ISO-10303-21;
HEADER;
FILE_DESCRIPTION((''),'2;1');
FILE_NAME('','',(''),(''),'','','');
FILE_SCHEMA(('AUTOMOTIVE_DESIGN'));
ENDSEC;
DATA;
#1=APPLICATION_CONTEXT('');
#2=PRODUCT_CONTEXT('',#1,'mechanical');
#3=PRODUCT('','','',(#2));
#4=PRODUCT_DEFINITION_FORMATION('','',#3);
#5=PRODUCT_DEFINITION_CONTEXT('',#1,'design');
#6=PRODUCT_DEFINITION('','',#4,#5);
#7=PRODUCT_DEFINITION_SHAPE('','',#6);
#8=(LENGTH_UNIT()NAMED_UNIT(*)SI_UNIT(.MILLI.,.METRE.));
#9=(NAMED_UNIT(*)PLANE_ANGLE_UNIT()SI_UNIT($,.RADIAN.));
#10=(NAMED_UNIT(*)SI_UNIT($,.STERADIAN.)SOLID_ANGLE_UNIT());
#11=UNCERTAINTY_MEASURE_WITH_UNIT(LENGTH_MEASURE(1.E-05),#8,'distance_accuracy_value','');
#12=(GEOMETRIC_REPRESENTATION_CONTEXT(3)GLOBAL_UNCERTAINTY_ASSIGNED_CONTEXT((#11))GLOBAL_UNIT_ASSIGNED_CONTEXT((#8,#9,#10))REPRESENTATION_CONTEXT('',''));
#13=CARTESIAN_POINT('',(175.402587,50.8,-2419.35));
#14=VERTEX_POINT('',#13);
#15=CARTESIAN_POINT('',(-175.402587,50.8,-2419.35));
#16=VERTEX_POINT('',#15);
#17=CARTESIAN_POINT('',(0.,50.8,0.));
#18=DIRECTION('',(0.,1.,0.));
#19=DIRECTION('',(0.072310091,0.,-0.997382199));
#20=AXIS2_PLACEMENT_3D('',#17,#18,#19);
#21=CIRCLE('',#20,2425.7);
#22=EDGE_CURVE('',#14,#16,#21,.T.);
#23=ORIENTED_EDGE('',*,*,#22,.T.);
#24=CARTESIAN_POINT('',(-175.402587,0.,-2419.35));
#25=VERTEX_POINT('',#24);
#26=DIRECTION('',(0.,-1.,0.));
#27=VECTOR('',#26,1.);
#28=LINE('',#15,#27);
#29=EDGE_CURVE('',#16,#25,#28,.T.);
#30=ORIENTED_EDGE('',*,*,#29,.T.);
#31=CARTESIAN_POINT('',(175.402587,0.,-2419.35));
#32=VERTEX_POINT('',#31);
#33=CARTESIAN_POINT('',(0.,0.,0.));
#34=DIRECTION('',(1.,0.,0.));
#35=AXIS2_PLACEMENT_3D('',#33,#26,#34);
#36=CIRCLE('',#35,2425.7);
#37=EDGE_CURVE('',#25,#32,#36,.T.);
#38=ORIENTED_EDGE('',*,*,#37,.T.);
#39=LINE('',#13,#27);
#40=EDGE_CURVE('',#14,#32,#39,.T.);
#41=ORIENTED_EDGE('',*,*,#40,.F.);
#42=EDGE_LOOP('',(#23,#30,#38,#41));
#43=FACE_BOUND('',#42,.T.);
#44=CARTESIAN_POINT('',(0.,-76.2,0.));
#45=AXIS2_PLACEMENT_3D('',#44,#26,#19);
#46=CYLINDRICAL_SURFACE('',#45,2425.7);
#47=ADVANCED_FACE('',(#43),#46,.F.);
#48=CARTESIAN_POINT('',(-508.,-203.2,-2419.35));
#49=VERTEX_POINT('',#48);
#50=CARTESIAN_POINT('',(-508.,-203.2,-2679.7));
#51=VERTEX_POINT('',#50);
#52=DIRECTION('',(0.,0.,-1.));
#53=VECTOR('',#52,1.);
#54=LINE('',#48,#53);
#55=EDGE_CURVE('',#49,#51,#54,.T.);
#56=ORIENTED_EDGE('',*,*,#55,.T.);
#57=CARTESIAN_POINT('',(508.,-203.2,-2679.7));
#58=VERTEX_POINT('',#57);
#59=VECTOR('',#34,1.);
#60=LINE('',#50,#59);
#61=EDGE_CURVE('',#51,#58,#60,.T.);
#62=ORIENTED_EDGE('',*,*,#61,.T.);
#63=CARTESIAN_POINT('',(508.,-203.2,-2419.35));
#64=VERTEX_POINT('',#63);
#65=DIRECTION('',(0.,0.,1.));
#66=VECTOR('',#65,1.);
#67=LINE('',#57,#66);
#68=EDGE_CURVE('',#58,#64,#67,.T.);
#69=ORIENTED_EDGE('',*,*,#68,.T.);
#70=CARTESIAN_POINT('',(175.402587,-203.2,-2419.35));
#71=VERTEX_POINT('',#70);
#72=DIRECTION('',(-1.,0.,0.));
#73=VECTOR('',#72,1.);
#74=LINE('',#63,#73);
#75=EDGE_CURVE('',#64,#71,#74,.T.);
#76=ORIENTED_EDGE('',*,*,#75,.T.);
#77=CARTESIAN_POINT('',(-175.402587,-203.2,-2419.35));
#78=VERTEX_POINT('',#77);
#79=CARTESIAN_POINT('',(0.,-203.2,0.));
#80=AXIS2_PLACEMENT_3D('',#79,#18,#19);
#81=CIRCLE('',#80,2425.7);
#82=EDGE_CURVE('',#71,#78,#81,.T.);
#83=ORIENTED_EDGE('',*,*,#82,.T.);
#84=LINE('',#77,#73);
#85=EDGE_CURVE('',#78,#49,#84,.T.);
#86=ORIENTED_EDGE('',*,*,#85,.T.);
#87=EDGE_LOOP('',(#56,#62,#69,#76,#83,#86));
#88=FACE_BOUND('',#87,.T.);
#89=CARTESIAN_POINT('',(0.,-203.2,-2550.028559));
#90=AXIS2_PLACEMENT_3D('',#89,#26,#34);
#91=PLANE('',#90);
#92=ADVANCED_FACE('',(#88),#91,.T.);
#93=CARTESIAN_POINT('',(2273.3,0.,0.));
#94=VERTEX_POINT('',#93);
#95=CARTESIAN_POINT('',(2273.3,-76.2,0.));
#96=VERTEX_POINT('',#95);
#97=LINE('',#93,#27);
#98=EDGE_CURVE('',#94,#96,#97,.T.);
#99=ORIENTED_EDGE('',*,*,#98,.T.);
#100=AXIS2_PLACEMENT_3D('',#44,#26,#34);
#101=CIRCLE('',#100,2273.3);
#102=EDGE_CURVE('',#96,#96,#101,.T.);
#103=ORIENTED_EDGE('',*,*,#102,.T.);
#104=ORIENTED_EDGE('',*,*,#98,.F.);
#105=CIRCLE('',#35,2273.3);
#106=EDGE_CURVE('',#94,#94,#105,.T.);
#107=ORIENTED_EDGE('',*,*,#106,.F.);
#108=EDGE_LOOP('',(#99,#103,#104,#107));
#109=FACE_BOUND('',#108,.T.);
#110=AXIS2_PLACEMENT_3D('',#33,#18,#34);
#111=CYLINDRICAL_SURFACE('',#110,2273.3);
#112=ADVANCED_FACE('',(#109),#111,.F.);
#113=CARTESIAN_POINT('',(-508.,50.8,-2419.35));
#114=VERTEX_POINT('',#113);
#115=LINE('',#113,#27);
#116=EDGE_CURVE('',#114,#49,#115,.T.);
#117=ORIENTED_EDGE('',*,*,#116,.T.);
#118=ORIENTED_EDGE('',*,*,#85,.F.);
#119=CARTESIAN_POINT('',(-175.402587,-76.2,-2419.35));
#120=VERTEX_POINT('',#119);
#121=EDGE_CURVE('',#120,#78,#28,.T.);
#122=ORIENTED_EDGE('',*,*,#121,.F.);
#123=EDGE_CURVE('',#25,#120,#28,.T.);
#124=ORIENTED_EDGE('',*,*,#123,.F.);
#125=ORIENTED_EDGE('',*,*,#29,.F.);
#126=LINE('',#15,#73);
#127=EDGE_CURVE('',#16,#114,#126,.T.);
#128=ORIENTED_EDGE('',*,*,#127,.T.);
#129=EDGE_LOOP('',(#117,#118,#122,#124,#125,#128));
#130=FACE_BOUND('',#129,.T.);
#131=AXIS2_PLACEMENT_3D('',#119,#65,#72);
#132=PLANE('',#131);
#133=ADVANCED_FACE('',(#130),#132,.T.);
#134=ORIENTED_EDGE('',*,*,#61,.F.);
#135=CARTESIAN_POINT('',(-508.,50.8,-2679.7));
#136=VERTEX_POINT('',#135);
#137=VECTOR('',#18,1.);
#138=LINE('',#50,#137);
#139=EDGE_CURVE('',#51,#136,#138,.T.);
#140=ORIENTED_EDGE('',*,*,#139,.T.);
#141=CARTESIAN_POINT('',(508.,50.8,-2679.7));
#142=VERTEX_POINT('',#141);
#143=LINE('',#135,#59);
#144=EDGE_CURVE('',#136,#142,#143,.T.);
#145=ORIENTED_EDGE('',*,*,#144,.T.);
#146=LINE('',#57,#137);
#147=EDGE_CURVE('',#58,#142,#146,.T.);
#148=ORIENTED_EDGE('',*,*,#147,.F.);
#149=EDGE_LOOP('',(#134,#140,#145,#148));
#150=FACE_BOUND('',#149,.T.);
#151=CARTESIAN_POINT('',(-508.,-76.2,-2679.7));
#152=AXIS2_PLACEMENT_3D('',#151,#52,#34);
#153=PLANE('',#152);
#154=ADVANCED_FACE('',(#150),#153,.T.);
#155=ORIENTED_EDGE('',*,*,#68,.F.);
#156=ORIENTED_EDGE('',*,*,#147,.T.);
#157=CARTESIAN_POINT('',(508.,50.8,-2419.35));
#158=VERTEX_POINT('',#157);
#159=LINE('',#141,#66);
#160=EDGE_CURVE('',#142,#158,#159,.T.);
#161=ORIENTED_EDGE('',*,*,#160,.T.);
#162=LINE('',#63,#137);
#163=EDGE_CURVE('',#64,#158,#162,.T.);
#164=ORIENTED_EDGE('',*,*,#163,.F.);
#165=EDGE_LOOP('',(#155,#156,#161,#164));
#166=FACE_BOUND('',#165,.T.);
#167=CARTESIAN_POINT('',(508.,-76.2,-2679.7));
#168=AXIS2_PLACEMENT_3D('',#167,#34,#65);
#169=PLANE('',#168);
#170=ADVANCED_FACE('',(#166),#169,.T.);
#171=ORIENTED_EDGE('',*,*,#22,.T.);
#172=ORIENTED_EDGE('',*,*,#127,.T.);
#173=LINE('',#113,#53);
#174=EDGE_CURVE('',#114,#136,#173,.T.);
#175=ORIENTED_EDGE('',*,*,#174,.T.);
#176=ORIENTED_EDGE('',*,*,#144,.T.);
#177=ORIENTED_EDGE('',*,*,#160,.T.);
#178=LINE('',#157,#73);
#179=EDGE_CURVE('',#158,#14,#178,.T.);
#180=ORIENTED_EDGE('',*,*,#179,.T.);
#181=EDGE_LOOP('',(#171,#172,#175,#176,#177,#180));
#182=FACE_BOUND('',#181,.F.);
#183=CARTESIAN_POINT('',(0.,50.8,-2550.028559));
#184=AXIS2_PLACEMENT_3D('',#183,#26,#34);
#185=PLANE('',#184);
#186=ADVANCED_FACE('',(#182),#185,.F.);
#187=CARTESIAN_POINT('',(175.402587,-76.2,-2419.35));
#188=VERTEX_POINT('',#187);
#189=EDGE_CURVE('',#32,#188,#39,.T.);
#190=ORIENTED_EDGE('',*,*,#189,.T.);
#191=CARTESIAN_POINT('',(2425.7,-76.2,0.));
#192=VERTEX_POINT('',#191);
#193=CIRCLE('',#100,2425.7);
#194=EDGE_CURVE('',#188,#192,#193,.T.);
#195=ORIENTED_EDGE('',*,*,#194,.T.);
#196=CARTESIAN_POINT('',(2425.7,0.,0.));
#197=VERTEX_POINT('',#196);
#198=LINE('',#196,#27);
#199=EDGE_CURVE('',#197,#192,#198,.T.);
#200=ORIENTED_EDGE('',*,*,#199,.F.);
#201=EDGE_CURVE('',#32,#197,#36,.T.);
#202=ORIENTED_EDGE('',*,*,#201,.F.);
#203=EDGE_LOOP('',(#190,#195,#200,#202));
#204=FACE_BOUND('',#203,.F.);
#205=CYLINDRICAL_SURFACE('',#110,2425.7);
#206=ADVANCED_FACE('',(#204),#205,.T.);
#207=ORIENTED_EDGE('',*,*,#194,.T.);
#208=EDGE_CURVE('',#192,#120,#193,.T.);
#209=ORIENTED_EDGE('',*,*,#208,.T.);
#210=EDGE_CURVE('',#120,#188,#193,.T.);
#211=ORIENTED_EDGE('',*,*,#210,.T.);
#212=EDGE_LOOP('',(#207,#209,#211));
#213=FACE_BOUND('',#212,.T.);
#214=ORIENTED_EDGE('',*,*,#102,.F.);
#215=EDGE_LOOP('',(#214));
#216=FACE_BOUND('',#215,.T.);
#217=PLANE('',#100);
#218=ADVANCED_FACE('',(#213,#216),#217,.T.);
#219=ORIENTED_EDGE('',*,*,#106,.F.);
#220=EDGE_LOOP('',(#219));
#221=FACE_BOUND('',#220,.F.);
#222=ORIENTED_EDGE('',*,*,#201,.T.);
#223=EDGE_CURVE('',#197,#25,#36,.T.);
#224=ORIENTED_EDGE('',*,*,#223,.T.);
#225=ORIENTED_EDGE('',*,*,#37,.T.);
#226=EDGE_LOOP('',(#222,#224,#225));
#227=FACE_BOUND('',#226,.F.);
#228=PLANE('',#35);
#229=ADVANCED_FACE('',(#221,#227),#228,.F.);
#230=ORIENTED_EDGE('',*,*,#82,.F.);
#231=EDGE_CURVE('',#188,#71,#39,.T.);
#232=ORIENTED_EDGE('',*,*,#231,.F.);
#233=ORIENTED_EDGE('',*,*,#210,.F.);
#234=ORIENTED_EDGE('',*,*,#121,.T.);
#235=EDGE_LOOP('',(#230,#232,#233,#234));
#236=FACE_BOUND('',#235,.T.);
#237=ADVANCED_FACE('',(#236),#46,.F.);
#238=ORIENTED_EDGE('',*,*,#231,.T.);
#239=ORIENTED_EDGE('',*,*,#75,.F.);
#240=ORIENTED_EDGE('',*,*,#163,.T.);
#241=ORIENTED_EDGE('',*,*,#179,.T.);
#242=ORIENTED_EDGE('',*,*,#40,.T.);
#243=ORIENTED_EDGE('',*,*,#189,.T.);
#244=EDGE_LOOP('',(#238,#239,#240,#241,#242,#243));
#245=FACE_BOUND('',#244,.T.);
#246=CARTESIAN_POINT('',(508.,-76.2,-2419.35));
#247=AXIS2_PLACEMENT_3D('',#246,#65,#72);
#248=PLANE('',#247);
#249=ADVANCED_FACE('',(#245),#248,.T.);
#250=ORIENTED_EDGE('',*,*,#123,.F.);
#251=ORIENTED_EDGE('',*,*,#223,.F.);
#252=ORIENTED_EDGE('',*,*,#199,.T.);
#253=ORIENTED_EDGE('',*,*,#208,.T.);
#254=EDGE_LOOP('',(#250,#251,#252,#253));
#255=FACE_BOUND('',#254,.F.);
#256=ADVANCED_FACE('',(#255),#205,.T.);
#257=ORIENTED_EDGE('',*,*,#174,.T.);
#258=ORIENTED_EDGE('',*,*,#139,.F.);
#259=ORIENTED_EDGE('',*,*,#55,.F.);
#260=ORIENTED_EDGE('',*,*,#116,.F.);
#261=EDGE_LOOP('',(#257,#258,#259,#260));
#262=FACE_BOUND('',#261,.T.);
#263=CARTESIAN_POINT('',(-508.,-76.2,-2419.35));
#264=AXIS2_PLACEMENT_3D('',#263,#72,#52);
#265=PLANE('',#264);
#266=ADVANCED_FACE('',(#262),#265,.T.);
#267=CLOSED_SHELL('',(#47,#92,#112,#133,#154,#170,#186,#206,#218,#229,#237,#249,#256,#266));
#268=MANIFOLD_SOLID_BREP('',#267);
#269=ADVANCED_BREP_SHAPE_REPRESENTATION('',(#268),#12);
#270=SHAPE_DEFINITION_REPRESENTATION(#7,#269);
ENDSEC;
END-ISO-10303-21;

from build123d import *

# Parameters (mm, degrees)
F0_R     = 2425.7
F0_R_2   = 2273.3
F1_DEPTH = 76.2
F3_DEPTH = 127


# Not quite as in the source:
# - a feature of the source that left no trace in its solid (it failed there, or was rolled back) is left out


with BuildPart() as f1:
    # F0 (on Front) → F1 (new body)
    with BuildSketch(Plane.XZ):
        Circle(F0_R)
        Circle(F0_R_2, mode=Mode.SUBTRACT)
    extrude(amount=F1_DEPTH)

    # F2 (on face) → F3 (join, symmetric)
    with BuildSketch(Plane.XZ.offset(76.2)):
        with BuildLine():
            Line((508, -2419.35), (175.402586925, -2419.35))
            ThreePointArc((175.402586925, -2419.35), (0, -2425.7), (-175.402586925, -2419.35))
            Line((-175.402586925, -2419.35), (-508, -2419.35))
            Line((-508, -2419.35), (-508, -2679.7))
            Line((-508, -2679.7), (0, -2679.7))
            Line((0, -2679.7), (508, -2679.7))
            Line((508, -2679.7), (508, -2419.35))
        make_face()
    extrude(amount=F3_DEPTH, both=True)


solid = f1.part
